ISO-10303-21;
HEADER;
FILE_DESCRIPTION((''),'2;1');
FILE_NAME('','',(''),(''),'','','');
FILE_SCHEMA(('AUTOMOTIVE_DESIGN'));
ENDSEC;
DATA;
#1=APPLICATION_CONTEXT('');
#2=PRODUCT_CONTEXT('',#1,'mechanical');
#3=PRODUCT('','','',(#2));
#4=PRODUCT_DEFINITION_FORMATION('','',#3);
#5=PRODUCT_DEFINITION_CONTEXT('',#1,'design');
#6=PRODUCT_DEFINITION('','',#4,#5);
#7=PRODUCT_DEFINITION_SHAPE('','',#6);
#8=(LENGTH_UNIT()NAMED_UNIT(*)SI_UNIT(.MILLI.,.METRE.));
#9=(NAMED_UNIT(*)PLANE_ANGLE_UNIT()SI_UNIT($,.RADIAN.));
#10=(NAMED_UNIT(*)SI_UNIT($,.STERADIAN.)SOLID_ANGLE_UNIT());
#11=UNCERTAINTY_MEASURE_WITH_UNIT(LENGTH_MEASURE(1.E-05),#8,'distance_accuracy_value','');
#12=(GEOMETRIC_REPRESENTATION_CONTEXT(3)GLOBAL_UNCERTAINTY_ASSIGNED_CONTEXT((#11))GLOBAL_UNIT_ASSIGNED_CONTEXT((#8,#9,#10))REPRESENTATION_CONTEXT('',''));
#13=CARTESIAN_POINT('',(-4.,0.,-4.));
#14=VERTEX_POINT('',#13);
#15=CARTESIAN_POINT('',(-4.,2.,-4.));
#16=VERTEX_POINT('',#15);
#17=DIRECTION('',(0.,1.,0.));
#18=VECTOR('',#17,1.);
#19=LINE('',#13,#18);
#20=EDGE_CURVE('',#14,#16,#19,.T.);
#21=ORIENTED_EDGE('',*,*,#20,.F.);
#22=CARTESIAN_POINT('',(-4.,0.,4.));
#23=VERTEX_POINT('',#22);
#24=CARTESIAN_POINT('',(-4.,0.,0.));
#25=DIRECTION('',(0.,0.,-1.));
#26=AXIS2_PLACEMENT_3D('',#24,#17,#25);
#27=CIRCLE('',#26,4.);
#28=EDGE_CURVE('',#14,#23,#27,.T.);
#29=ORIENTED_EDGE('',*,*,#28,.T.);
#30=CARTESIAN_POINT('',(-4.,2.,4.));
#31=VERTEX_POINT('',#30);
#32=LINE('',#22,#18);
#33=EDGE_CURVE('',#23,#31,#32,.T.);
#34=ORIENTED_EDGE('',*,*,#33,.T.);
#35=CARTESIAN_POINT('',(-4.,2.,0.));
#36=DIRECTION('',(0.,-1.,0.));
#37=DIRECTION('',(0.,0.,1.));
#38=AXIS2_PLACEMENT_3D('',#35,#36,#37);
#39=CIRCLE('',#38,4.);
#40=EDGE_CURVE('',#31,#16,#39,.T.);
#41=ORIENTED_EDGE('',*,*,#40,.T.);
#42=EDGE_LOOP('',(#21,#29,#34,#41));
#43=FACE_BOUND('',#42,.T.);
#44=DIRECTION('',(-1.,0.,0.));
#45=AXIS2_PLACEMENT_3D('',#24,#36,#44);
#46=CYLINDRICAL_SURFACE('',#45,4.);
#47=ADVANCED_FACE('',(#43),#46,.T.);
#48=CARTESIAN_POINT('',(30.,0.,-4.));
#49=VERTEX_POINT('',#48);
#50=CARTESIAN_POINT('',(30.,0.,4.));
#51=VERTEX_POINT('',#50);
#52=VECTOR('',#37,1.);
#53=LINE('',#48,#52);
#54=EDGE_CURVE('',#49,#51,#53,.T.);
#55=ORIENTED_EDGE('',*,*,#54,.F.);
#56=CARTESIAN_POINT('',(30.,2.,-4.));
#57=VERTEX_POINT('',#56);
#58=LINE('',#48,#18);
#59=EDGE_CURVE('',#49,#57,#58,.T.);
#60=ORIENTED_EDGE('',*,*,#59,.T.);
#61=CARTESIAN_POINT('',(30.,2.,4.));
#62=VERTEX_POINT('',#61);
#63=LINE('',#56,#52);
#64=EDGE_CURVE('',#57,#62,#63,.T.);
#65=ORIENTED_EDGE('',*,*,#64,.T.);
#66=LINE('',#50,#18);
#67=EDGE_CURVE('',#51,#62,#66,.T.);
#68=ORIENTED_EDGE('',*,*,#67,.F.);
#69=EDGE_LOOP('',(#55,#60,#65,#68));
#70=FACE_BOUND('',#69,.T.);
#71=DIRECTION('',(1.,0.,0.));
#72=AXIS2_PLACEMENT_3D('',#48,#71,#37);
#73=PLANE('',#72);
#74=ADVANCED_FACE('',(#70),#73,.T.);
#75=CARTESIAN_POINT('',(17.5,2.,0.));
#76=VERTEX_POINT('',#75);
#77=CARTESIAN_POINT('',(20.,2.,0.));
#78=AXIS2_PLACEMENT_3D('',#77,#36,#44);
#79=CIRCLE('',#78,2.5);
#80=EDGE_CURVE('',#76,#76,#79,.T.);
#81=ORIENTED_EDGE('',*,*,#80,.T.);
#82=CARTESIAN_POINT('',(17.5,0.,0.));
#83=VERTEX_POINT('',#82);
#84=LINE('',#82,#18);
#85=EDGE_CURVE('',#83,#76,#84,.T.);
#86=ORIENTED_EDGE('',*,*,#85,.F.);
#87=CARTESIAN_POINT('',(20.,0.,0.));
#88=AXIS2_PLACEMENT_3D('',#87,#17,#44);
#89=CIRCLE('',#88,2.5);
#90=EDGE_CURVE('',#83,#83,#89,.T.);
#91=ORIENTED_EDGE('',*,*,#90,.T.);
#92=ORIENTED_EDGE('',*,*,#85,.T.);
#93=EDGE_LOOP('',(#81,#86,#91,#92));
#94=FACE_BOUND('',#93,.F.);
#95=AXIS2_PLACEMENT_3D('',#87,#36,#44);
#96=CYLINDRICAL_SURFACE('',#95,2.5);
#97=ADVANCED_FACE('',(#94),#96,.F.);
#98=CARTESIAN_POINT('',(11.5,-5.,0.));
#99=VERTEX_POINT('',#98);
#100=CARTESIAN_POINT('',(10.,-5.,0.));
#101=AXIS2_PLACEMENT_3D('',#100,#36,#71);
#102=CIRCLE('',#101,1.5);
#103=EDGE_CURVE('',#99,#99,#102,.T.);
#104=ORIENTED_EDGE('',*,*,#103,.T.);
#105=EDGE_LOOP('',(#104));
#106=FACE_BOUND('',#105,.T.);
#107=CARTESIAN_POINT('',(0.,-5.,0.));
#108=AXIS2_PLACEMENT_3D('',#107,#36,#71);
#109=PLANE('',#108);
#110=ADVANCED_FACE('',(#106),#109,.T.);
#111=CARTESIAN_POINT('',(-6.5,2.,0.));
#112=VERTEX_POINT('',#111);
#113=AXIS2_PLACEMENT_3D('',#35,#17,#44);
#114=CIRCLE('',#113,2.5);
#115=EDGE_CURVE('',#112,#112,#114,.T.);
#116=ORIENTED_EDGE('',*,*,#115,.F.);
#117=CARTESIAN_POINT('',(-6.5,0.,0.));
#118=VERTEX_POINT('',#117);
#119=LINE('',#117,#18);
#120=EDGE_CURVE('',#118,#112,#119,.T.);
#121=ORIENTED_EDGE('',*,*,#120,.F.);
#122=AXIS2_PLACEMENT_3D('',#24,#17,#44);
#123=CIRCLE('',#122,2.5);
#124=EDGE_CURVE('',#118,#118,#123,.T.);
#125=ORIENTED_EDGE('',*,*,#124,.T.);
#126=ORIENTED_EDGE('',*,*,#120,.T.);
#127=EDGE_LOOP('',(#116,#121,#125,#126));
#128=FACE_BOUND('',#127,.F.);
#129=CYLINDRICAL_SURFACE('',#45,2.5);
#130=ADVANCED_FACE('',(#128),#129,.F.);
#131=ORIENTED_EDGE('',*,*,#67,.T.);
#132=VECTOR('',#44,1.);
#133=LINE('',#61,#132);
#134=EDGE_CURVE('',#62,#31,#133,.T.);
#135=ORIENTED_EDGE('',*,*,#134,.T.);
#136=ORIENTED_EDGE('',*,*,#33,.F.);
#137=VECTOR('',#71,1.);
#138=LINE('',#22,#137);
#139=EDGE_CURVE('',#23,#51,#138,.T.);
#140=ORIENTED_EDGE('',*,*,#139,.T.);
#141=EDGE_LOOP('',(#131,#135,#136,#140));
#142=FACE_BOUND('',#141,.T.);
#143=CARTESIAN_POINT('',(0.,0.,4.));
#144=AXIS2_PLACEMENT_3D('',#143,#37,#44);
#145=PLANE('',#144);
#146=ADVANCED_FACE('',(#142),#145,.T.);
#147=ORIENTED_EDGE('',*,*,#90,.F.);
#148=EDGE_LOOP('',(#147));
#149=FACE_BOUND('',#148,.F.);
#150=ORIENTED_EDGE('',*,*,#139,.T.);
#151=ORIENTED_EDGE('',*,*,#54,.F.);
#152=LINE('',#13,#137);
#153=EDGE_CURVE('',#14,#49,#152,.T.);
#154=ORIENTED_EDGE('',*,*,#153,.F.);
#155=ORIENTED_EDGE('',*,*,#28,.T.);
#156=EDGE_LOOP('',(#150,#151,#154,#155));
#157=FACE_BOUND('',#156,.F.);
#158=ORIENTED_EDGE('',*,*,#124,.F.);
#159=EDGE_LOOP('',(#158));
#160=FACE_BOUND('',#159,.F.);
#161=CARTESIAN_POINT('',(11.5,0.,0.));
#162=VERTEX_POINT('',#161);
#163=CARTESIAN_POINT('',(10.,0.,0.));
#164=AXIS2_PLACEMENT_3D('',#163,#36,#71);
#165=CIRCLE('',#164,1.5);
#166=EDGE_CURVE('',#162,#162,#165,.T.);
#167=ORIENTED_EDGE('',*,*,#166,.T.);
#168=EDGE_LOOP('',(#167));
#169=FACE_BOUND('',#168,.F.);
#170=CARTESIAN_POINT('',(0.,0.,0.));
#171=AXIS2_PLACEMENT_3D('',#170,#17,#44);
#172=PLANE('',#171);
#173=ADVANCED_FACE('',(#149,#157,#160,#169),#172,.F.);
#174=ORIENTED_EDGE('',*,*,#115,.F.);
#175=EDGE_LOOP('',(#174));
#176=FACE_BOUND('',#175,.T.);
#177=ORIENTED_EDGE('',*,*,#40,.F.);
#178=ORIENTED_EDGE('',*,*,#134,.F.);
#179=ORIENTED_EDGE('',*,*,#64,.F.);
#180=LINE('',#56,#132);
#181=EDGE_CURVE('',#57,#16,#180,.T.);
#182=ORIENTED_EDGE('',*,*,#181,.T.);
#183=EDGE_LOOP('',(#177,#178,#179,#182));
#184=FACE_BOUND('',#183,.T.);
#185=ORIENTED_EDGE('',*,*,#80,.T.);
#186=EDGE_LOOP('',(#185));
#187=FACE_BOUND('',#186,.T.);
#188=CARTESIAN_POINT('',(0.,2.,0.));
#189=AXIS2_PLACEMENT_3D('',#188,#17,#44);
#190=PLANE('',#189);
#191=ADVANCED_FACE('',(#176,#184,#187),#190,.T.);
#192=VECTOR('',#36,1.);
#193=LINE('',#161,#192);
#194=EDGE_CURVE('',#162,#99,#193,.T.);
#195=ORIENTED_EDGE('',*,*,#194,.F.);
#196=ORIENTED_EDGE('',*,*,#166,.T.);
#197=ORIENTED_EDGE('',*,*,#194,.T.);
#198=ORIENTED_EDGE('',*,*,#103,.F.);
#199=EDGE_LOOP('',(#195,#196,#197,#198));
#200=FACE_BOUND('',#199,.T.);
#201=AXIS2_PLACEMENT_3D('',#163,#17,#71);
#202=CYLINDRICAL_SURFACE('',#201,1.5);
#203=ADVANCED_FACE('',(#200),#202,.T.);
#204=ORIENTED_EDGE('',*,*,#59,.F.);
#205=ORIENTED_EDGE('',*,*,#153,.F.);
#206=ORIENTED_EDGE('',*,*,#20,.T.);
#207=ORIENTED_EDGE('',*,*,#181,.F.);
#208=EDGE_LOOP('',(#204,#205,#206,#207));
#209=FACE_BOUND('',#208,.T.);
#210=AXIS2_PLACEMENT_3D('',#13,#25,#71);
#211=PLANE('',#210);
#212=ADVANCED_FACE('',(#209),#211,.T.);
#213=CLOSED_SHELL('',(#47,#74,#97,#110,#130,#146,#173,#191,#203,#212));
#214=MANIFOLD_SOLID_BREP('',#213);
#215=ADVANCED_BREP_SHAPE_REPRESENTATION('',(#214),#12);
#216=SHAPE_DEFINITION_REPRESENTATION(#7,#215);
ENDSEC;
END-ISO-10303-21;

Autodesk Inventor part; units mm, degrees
ref_plane "YZ Plane" through (0, 0, 0) normal (1, 0, 0) x (0, 1, 0)
ref_plane "XZ Plane" through (0, 0, 0) normal (0, 1, 0) x (-1, 0, 0)
ref_plane "XY Plane" through (0, 0, 0) normal (0, 0, 1) x (1, 0, 0)
sketch "Sketch1" plane through (0, 0, 0) normal (0, 1, 0) x (-1, 0, 0)
  line L0 (0, 4) -> (-20, 4)
  line L1 (-20, 4) -> (-20, -4)
  line L2 (-20, -4) -> (0, -4)
  circle A0 centre (-20, 0) radius 4
  circle A1 centre (-20, 0) radius 2.5
  line L3 (-20, -4) -> (-30, -4)
  line L4 (-30, -4) -> (-30, 4)
  line L5 (-30, 4) -> (-20, 4)
  line L6 (-20, 4) -> (-20, -4)
  circle A2 centre (4, 0) radius 4
  circle A3 centre (4, 0) radius 2.5
  line L7 (0, 4) -> (4, 4)
  line L8 (4, -4) -> (0, -4)
  point P0 (-20, -2.5)
  point P1 (-20, 2.5)
  dimension "d32" = 20
  dimension "d34" = 5
  dimension "d47" = 10
  dimension "d48" = 5
extrude "Extrusion1" add sketch "Sketch1" along normal blind 2 contours L7 A2 L8 L2 A0 L0 | A0 L1 A1 | L1 A1 A0 | A0 L3 L4 L5 | A2
thread "Thread2" size "M5x0.8" class "6H" standard "ANSI Metric M Profile" full length
sketch "Sketch4" plane through (0, 0, 0) normal (0, -1, 0) x (1, 0, 0)
  circle A0 centre (10, 0) radius 1.5
  point P0 (0, 0)
  dimension "d46" = 3
extrude "Extrusion5" add sketch "Sketch4" along normal blind 5
thread "Thread3" size "M5x0.8" class "6H" standard "ANSI Metric M Profile" full length
properties part number "link"
